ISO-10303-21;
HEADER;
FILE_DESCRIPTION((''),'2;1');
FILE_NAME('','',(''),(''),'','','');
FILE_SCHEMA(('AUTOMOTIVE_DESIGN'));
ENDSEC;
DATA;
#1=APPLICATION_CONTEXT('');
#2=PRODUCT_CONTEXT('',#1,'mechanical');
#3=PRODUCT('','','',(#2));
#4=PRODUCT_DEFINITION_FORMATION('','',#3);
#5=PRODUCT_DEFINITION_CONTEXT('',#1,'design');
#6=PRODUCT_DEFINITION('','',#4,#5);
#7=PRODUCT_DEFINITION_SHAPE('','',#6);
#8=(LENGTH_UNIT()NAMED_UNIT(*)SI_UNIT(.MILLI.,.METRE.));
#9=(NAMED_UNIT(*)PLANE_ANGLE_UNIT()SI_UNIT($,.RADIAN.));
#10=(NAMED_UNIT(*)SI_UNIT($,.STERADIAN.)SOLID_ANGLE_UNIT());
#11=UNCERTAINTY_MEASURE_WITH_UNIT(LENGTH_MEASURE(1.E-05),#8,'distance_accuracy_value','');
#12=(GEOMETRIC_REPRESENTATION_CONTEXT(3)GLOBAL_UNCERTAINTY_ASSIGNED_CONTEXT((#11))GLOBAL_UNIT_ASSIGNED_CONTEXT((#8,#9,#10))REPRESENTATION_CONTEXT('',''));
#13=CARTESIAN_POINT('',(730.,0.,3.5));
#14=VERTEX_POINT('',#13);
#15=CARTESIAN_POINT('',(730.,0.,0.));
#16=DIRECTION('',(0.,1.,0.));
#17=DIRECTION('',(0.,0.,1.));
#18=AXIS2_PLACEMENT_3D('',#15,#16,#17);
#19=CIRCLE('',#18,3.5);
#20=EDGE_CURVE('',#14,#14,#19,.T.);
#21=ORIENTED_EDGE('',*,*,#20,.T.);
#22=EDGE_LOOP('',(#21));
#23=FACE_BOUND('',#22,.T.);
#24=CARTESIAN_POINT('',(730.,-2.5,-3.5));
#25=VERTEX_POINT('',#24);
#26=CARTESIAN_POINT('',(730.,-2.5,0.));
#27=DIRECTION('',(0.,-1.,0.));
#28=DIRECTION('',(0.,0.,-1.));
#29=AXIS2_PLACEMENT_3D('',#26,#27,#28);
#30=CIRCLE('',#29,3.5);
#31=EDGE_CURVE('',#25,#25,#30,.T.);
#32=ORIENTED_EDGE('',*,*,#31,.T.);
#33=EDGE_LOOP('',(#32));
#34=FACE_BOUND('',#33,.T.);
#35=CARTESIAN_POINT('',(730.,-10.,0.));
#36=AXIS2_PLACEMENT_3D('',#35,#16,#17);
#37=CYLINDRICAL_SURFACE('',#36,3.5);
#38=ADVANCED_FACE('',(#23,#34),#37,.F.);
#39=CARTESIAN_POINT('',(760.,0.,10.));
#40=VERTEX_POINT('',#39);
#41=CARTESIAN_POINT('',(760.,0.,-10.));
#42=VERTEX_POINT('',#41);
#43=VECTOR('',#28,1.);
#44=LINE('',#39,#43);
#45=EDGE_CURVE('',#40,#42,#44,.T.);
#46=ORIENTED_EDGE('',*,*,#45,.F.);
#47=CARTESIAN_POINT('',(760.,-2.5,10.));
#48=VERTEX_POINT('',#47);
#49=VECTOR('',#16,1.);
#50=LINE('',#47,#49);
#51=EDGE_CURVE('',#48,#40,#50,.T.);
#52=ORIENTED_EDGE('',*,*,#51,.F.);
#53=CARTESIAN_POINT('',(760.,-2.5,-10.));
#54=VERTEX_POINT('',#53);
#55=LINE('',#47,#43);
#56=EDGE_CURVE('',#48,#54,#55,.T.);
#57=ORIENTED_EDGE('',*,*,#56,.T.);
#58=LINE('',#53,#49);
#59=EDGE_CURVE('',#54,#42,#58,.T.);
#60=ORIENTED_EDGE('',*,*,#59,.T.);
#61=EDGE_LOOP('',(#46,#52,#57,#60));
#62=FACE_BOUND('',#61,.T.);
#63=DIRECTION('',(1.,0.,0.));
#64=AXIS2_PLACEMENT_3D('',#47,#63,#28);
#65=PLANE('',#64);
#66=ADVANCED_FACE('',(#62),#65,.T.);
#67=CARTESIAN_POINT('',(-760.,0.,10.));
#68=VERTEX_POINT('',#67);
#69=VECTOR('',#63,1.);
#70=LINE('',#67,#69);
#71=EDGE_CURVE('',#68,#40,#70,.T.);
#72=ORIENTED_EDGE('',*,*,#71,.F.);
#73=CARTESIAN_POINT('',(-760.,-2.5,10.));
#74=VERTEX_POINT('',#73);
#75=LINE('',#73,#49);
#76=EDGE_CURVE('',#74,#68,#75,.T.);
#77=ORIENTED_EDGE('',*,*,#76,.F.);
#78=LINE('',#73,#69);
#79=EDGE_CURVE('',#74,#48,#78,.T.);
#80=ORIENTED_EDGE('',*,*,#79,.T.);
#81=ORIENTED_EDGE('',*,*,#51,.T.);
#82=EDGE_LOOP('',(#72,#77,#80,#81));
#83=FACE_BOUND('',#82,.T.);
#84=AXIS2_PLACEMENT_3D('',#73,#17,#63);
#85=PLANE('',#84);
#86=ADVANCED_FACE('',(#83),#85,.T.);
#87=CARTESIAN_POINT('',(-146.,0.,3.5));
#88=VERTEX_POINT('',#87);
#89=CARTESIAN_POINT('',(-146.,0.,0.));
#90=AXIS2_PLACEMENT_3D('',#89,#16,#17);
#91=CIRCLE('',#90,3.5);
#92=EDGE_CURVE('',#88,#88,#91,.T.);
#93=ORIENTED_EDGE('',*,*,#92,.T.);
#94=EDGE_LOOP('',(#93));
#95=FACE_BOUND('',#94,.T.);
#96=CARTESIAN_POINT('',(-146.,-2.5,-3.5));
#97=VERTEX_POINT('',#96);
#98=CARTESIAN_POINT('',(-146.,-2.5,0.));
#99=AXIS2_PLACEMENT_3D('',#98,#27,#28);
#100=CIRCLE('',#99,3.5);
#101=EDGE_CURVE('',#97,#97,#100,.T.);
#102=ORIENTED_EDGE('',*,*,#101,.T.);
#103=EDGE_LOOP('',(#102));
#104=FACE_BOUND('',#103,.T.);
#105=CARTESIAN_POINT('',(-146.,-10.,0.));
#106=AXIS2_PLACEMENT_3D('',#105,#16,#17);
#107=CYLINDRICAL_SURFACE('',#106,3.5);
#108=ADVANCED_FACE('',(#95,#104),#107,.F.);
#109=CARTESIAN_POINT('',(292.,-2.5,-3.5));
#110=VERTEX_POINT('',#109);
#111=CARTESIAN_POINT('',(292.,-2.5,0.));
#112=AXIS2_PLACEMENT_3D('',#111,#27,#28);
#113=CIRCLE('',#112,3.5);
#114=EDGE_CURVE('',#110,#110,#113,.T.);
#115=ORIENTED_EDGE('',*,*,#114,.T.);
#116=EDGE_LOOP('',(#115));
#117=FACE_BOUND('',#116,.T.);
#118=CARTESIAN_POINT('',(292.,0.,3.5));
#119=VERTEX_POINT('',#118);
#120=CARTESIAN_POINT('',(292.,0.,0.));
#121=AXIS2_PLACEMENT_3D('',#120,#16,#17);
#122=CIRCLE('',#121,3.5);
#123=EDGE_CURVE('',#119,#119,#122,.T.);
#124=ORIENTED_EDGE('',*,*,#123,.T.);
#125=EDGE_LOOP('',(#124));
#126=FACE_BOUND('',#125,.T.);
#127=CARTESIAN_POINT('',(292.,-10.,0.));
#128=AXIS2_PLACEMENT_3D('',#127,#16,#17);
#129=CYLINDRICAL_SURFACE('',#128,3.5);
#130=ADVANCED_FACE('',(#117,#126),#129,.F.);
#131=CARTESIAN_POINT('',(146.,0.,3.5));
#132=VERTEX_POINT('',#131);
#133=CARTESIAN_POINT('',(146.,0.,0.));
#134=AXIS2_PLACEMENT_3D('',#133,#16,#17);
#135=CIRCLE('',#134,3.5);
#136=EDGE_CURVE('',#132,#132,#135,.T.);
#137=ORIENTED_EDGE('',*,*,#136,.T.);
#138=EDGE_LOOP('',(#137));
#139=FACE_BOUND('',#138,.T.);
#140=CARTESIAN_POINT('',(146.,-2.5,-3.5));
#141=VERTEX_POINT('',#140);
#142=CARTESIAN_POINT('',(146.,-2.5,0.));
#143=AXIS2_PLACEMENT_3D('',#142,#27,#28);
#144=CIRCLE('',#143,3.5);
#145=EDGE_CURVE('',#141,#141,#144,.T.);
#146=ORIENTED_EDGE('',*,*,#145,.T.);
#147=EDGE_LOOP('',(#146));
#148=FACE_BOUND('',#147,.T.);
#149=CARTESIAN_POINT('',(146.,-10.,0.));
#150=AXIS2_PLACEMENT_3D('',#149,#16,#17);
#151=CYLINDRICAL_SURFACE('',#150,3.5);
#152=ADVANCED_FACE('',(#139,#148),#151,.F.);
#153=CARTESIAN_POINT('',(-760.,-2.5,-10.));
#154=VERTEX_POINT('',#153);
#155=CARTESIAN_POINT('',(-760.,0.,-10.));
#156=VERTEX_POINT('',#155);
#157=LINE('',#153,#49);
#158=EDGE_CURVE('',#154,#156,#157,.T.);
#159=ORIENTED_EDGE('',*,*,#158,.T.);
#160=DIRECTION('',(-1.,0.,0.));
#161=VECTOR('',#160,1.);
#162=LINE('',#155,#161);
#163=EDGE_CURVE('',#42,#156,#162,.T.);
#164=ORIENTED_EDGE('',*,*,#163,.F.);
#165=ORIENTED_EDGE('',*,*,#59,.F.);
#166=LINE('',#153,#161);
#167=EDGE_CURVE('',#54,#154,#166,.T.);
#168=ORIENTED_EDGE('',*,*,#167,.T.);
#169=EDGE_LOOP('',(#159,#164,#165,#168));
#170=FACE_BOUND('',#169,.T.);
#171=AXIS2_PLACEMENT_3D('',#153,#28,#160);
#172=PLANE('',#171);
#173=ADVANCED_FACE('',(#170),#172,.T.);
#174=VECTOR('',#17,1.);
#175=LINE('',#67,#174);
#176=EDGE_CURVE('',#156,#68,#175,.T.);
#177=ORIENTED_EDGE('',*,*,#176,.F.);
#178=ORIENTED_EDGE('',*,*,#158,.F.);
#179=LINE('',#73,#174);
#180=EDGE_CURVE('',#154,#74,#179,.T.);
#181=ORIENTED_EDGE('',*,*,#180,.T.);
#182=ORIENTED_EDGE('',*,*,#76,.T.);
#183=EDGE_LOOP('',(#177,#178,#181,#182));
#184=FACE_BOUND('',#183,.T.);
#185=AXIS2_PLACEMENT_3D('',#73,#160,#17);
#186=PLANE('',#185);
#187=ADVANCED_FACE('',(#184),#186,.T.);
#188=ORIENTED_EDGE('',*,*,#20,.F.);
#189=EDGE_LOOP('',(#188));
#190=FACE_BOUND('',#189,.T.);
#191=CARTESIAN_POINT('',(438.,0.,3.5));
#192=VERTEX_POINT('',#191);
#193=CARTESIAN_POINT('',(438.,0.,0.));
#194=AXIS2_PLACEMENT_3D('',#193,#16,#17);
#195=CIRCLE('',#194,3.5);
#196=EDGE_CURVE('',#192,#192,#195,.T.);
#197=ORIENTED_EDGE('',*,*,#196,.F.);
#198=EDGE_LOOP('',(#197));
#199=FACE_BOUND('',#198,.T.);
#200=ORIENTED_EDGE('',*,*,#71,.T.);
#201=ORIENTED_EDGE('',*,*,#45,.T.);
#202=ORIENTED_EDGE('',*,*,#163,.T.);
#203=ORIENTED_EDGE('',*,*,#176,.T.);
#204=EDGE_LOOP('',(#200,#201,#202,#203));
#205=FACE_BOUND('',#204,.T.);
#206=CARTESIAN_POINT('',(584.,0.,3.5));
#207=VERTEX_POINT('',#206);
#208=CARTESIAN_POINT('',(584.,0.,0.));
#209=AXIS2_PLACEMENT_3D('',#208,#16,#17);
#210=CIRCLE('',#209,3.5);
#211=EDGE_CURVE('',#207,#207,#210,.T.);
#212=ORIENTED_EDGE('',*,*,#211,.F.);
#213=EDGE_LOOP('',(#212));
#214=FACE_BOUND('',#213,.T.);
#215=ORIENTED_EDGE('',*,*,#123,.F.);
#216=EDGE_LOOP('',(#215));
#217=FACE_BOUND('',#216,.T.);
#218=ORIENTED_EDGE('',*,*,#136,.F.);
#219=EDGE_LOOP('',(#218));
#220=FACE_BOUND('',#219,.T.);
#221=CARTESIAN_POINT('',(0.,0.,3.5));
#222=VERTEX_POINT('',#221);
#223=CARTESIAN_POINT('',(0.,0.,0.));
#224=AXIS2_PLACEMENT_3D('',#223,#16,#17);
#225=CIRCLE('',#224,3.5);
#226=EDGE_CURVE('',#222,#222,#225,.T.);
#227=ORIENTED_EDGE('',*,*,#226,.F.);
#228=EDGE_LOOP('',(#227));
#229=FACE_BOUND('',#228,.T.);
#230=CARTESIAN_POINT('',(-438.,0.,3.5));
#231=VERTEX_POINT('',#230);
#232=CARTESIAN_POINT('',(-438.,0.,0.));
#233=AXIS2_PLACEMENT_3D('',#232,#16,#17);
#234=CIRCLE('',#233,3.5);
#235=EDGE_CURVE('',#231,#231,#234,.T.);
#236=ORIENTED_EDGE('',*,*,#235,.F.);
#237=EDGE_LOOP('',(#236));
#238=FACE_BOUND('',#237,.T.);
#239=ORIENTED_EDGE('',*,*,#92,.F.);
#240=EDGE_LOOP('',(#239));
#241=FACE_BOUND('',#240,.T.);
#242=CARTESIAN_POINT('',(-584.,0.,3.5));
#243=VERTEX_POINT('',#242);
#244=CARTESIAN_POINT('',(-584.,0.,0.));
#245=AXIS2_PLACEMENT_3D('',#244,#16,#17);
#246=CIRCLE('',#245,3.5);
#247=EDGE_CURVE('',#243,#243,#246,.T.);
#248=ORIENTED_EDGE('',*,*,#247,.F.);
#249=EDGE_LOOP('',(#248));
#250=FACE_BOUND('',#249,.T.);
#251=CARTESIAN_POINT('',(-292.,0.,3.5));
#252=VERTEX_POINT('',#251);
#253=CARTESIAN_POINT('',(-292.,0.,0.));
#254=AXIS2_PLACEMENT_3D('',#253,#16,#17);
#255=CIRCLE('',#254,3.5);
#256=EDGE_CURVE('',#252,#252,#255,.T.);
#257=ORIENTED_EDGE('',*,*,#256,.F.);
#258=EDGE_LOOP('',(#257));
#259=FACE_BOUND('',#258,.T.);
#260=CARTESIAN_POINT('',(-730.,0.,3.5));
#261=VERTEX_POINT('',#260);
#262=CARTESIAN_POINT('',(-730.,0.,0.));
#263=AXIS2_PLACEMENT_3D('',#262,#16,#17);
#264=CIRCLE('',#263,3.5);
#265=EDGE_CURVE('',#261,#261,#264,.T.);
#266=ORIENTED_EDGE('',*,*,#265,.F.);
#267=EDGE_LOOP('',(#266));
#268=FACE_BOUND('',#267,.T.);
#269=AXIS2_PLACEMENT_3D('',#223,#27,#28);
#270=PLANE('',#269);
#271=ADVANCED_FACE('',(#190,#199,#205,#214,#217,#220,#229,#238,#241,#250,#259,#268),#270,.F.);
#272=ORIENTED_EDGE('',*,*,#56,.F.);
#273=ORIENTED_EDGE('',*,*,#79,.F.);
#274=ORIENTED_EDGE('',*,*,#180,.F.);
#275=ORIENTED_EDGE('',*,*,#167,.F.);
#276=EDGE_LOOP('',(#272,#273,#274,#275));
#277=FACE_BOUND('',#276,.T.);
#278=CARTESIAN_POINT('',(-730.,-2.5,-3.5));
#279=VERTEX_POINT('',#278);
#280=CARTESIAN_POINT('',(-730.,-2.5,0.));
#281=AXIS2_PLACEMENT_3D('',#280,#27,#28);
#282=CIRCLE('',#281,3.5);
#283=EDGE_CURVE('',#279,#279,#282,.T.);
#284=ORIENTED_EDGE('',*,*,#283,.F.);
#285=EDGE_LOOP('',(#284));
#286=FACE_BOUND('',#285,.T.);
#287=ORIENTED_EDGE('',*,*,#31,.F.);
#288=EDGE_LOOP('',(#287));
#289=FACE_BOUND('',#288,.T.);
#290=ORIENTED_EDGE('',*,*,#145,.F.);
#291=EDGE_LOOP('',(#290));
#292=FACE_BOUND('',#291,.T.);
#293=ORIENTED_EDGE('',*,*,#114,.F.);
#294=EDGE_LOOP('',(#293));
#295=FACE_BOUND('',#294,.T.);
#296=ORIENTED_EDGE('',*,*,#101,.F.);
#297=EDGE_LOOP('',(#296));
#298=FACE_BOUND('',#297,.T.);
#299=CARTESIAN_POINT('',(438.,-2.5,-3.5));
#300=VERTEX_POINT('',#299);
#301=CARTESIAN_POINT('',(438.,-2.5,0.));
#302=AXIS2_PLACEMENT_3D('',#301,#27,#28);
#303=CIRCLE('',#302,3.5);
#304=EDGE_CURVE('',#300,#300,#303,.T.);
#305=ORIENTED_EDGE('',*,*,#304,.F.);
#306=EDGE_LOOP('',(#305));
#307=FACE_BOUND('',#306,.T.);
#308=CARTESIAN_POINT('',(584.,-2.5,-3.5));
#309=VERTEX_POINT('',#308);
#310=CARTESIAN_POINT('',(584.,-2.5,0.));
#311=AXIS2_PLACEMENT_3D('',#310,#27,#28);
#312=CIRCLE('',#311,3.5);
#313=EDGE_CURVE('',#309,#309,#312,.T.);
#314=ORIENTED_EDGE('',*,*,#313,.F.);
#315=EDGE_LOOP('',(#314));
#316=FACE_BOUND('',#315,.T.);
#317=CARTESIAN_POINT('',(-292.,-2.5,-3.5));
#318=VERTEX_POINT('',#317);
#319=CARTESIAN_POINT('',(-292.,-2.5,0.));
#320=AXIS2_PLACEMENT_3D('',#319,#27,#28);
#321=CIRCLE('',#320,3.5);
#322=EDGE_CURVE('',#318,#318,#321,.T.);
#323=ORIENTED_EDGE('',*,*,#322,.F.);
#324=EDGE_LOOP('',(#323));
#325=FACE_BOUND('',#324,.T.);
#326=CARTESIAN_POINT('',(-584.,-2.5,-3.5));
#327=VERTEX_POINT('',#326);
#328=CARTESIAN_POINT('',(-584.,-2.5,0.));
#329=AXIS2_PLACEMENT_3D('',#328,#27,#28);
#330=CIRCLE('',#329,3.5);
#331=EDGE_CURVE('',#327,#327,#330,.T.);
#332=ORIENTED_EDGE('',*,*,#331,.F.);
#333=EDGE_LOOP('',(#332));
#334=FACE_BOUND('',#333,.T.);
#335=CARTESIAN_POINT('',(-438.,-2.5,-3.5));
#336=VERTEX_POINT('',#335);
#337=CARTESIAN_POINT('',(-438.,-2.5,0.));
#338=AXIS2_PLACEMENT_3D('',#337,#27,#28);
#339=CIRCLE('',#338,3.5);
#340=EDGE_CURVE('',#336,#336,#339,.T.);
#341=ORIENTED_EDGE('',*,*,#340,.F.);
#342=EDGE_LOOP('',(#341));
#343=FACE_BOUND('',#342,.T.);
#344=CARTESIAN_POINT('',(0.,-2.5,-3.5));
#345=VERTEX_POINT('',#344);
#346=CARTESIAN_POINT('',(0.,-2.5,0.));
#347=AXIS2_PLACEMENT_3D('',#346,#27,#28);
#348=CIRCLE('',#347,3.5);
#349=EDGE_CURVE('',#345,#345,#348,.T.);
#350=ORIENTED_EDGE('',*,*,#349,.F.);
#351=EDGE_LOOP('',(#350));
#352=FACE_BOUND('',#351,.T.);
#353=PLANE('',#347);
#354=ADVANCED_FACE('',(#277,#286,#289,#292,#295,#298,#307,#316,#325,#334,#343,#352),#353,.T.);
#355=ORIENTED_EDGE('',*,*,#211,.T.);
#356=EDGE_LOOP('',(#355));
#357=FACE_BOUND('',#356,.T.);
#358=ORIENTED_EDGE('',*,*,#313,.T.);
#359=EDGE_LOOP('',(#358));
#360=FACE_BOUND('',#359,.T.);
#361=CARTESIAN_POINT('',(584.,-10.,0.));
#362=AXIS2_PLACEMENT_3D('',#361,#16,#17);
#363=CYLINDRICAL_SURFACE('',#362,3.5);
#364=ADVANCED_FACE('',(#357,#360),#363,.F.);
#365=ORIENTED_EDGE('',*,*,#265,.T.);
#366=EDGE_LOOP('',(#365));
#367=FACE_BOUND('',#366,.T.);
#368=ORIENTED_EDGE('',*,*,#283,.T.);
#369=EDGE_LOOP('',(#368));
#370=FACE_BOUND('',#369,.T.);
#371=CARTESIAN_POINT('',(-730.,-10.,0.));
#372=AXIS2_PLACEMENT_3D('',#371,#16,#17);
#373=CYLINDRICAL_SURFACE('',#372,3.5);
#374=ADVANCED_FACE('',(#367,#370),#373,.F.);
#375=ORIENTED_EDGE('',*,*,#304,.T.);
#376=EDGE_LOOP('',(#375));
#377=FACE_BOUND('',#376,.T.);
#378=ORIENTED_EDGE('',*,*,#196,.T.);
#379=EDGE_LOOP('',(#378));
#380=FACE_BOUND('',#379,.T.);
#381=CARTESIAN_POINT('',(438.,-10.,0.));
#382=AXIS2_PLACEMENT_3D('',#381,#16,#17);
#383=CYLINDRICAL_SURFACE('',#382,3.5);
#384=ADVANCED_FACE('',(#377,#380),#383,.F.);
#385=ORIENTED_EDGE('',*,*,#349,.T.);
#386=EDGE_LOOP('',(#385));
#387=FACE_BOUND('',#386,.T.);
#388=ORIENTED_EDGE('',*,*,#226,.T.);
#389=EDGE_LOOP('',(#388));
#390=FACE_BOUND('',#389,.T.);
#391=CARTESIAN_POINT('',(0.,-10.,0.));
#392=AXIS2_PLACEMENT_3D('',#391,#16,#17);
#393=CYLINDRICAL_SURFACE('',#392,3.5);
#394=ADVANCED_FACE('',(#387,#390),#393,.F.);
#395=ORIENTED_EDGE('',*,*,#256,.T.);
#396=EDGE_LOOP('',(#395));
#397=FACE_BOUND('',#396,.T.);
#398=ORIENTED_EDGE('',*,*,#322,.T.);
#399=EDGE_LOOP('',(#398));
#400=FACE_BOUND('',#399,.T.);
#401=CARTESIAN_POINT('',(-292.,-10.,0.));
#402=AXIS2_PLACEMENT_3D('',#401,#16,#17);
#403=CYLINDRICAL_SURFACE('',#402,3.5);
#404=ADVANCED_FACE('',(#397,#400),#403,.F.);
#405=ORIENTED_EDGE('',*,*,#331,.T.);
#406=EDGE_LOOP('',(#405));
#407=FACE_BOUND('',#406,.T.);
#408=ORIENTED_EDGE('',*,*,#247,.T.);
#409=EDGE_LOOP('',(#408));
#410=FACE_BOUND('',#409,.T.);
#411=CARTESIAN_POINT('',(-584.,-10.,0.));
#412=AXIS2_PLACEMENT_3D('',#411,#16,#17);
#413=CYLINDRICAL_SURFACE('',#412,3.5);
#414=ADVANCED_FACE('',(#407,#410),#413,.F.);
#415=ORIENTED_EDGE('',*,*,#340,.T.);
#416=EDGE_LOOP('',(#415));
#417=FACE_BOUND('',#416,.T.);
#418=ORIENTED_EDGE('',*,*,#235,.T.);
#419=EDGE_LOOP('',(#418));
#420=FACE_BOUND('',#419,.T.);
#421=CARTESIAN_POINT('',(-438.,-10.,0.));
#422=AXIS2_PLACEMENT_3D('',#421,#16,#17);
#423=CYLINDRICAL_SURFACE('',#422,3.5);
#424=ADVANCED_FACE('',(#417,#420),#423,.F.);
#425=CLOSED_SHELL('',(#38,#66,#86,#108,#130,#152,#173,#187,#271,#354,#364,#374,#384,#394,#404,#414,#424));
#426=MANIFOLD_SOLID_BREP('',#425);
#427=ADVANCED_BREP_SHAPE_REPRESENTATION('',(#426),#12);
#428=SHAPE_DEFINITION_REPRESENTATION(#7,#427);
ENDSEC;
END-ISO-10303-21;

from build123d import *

# Parameters (mm, degrees)
SKETCH1_W           = 1520
SKETCH1_H           = 20
BASE_FLANGE1_DEPTH  = 2.5
SKETCH6_R           = 3.5
CUT_EXTRUDE1_DEPTH  = 10
LPATTERN1_COUNT     = 6
LPATTERN1_PITCH     = 146
LPATTERN1_COL_COUNT = 6
LPATTERN1_COL_PITCH = 146


# Sheet-metal steps are written as plain solids
with BuildPart() as part:
    # Sketch1 → Base-Flange1 (new body)
    with BuildSketch(Plane(origin=(0, 0, 0), x_dir=(1, 0, 0), z_dir=(0, 1, 0))):
        Rectangle(SKETCH1_W, SKETCH1_H)
    extrude(amount=-BASE_FLANGE1_DEPTH)

    # Sketch6 → Cut-Extrude1 (cut)
    with BuildSketch(Plane(origin=(0, 0, 0), x_dir=(1, 0, 0), z_dir=(0, 1, 0))):
        with Locations(Location((0, 0, 0), (0, 0, 270))):
            Circle(SKETCH6_R)
    cut_extrude1 = extrude(amount=-CUT_EXTRUDE1_DEPTH, mode=Mode.SUBTRACT)

    # LPattern1: Cut-Extrude1 ×6
    with Locations(*[(-i * LPATTERN1_PITCH, 0, 0) for i in range(1, LPATTERN1_COUNT)]):
        add(cut_extrude1, mode=Mode.SUBTRACT)

    # LPattern1 col: Cut-Extrude1 ×6
    with Locations(*[(i * LPATTERN1_COL_PITCH, 0, 0) for i in range(1, LPATTERN1_COL_COUNT)]):
        add(cut_extrude1, mode=Mode.SUBTRACT)


solid = part.part
